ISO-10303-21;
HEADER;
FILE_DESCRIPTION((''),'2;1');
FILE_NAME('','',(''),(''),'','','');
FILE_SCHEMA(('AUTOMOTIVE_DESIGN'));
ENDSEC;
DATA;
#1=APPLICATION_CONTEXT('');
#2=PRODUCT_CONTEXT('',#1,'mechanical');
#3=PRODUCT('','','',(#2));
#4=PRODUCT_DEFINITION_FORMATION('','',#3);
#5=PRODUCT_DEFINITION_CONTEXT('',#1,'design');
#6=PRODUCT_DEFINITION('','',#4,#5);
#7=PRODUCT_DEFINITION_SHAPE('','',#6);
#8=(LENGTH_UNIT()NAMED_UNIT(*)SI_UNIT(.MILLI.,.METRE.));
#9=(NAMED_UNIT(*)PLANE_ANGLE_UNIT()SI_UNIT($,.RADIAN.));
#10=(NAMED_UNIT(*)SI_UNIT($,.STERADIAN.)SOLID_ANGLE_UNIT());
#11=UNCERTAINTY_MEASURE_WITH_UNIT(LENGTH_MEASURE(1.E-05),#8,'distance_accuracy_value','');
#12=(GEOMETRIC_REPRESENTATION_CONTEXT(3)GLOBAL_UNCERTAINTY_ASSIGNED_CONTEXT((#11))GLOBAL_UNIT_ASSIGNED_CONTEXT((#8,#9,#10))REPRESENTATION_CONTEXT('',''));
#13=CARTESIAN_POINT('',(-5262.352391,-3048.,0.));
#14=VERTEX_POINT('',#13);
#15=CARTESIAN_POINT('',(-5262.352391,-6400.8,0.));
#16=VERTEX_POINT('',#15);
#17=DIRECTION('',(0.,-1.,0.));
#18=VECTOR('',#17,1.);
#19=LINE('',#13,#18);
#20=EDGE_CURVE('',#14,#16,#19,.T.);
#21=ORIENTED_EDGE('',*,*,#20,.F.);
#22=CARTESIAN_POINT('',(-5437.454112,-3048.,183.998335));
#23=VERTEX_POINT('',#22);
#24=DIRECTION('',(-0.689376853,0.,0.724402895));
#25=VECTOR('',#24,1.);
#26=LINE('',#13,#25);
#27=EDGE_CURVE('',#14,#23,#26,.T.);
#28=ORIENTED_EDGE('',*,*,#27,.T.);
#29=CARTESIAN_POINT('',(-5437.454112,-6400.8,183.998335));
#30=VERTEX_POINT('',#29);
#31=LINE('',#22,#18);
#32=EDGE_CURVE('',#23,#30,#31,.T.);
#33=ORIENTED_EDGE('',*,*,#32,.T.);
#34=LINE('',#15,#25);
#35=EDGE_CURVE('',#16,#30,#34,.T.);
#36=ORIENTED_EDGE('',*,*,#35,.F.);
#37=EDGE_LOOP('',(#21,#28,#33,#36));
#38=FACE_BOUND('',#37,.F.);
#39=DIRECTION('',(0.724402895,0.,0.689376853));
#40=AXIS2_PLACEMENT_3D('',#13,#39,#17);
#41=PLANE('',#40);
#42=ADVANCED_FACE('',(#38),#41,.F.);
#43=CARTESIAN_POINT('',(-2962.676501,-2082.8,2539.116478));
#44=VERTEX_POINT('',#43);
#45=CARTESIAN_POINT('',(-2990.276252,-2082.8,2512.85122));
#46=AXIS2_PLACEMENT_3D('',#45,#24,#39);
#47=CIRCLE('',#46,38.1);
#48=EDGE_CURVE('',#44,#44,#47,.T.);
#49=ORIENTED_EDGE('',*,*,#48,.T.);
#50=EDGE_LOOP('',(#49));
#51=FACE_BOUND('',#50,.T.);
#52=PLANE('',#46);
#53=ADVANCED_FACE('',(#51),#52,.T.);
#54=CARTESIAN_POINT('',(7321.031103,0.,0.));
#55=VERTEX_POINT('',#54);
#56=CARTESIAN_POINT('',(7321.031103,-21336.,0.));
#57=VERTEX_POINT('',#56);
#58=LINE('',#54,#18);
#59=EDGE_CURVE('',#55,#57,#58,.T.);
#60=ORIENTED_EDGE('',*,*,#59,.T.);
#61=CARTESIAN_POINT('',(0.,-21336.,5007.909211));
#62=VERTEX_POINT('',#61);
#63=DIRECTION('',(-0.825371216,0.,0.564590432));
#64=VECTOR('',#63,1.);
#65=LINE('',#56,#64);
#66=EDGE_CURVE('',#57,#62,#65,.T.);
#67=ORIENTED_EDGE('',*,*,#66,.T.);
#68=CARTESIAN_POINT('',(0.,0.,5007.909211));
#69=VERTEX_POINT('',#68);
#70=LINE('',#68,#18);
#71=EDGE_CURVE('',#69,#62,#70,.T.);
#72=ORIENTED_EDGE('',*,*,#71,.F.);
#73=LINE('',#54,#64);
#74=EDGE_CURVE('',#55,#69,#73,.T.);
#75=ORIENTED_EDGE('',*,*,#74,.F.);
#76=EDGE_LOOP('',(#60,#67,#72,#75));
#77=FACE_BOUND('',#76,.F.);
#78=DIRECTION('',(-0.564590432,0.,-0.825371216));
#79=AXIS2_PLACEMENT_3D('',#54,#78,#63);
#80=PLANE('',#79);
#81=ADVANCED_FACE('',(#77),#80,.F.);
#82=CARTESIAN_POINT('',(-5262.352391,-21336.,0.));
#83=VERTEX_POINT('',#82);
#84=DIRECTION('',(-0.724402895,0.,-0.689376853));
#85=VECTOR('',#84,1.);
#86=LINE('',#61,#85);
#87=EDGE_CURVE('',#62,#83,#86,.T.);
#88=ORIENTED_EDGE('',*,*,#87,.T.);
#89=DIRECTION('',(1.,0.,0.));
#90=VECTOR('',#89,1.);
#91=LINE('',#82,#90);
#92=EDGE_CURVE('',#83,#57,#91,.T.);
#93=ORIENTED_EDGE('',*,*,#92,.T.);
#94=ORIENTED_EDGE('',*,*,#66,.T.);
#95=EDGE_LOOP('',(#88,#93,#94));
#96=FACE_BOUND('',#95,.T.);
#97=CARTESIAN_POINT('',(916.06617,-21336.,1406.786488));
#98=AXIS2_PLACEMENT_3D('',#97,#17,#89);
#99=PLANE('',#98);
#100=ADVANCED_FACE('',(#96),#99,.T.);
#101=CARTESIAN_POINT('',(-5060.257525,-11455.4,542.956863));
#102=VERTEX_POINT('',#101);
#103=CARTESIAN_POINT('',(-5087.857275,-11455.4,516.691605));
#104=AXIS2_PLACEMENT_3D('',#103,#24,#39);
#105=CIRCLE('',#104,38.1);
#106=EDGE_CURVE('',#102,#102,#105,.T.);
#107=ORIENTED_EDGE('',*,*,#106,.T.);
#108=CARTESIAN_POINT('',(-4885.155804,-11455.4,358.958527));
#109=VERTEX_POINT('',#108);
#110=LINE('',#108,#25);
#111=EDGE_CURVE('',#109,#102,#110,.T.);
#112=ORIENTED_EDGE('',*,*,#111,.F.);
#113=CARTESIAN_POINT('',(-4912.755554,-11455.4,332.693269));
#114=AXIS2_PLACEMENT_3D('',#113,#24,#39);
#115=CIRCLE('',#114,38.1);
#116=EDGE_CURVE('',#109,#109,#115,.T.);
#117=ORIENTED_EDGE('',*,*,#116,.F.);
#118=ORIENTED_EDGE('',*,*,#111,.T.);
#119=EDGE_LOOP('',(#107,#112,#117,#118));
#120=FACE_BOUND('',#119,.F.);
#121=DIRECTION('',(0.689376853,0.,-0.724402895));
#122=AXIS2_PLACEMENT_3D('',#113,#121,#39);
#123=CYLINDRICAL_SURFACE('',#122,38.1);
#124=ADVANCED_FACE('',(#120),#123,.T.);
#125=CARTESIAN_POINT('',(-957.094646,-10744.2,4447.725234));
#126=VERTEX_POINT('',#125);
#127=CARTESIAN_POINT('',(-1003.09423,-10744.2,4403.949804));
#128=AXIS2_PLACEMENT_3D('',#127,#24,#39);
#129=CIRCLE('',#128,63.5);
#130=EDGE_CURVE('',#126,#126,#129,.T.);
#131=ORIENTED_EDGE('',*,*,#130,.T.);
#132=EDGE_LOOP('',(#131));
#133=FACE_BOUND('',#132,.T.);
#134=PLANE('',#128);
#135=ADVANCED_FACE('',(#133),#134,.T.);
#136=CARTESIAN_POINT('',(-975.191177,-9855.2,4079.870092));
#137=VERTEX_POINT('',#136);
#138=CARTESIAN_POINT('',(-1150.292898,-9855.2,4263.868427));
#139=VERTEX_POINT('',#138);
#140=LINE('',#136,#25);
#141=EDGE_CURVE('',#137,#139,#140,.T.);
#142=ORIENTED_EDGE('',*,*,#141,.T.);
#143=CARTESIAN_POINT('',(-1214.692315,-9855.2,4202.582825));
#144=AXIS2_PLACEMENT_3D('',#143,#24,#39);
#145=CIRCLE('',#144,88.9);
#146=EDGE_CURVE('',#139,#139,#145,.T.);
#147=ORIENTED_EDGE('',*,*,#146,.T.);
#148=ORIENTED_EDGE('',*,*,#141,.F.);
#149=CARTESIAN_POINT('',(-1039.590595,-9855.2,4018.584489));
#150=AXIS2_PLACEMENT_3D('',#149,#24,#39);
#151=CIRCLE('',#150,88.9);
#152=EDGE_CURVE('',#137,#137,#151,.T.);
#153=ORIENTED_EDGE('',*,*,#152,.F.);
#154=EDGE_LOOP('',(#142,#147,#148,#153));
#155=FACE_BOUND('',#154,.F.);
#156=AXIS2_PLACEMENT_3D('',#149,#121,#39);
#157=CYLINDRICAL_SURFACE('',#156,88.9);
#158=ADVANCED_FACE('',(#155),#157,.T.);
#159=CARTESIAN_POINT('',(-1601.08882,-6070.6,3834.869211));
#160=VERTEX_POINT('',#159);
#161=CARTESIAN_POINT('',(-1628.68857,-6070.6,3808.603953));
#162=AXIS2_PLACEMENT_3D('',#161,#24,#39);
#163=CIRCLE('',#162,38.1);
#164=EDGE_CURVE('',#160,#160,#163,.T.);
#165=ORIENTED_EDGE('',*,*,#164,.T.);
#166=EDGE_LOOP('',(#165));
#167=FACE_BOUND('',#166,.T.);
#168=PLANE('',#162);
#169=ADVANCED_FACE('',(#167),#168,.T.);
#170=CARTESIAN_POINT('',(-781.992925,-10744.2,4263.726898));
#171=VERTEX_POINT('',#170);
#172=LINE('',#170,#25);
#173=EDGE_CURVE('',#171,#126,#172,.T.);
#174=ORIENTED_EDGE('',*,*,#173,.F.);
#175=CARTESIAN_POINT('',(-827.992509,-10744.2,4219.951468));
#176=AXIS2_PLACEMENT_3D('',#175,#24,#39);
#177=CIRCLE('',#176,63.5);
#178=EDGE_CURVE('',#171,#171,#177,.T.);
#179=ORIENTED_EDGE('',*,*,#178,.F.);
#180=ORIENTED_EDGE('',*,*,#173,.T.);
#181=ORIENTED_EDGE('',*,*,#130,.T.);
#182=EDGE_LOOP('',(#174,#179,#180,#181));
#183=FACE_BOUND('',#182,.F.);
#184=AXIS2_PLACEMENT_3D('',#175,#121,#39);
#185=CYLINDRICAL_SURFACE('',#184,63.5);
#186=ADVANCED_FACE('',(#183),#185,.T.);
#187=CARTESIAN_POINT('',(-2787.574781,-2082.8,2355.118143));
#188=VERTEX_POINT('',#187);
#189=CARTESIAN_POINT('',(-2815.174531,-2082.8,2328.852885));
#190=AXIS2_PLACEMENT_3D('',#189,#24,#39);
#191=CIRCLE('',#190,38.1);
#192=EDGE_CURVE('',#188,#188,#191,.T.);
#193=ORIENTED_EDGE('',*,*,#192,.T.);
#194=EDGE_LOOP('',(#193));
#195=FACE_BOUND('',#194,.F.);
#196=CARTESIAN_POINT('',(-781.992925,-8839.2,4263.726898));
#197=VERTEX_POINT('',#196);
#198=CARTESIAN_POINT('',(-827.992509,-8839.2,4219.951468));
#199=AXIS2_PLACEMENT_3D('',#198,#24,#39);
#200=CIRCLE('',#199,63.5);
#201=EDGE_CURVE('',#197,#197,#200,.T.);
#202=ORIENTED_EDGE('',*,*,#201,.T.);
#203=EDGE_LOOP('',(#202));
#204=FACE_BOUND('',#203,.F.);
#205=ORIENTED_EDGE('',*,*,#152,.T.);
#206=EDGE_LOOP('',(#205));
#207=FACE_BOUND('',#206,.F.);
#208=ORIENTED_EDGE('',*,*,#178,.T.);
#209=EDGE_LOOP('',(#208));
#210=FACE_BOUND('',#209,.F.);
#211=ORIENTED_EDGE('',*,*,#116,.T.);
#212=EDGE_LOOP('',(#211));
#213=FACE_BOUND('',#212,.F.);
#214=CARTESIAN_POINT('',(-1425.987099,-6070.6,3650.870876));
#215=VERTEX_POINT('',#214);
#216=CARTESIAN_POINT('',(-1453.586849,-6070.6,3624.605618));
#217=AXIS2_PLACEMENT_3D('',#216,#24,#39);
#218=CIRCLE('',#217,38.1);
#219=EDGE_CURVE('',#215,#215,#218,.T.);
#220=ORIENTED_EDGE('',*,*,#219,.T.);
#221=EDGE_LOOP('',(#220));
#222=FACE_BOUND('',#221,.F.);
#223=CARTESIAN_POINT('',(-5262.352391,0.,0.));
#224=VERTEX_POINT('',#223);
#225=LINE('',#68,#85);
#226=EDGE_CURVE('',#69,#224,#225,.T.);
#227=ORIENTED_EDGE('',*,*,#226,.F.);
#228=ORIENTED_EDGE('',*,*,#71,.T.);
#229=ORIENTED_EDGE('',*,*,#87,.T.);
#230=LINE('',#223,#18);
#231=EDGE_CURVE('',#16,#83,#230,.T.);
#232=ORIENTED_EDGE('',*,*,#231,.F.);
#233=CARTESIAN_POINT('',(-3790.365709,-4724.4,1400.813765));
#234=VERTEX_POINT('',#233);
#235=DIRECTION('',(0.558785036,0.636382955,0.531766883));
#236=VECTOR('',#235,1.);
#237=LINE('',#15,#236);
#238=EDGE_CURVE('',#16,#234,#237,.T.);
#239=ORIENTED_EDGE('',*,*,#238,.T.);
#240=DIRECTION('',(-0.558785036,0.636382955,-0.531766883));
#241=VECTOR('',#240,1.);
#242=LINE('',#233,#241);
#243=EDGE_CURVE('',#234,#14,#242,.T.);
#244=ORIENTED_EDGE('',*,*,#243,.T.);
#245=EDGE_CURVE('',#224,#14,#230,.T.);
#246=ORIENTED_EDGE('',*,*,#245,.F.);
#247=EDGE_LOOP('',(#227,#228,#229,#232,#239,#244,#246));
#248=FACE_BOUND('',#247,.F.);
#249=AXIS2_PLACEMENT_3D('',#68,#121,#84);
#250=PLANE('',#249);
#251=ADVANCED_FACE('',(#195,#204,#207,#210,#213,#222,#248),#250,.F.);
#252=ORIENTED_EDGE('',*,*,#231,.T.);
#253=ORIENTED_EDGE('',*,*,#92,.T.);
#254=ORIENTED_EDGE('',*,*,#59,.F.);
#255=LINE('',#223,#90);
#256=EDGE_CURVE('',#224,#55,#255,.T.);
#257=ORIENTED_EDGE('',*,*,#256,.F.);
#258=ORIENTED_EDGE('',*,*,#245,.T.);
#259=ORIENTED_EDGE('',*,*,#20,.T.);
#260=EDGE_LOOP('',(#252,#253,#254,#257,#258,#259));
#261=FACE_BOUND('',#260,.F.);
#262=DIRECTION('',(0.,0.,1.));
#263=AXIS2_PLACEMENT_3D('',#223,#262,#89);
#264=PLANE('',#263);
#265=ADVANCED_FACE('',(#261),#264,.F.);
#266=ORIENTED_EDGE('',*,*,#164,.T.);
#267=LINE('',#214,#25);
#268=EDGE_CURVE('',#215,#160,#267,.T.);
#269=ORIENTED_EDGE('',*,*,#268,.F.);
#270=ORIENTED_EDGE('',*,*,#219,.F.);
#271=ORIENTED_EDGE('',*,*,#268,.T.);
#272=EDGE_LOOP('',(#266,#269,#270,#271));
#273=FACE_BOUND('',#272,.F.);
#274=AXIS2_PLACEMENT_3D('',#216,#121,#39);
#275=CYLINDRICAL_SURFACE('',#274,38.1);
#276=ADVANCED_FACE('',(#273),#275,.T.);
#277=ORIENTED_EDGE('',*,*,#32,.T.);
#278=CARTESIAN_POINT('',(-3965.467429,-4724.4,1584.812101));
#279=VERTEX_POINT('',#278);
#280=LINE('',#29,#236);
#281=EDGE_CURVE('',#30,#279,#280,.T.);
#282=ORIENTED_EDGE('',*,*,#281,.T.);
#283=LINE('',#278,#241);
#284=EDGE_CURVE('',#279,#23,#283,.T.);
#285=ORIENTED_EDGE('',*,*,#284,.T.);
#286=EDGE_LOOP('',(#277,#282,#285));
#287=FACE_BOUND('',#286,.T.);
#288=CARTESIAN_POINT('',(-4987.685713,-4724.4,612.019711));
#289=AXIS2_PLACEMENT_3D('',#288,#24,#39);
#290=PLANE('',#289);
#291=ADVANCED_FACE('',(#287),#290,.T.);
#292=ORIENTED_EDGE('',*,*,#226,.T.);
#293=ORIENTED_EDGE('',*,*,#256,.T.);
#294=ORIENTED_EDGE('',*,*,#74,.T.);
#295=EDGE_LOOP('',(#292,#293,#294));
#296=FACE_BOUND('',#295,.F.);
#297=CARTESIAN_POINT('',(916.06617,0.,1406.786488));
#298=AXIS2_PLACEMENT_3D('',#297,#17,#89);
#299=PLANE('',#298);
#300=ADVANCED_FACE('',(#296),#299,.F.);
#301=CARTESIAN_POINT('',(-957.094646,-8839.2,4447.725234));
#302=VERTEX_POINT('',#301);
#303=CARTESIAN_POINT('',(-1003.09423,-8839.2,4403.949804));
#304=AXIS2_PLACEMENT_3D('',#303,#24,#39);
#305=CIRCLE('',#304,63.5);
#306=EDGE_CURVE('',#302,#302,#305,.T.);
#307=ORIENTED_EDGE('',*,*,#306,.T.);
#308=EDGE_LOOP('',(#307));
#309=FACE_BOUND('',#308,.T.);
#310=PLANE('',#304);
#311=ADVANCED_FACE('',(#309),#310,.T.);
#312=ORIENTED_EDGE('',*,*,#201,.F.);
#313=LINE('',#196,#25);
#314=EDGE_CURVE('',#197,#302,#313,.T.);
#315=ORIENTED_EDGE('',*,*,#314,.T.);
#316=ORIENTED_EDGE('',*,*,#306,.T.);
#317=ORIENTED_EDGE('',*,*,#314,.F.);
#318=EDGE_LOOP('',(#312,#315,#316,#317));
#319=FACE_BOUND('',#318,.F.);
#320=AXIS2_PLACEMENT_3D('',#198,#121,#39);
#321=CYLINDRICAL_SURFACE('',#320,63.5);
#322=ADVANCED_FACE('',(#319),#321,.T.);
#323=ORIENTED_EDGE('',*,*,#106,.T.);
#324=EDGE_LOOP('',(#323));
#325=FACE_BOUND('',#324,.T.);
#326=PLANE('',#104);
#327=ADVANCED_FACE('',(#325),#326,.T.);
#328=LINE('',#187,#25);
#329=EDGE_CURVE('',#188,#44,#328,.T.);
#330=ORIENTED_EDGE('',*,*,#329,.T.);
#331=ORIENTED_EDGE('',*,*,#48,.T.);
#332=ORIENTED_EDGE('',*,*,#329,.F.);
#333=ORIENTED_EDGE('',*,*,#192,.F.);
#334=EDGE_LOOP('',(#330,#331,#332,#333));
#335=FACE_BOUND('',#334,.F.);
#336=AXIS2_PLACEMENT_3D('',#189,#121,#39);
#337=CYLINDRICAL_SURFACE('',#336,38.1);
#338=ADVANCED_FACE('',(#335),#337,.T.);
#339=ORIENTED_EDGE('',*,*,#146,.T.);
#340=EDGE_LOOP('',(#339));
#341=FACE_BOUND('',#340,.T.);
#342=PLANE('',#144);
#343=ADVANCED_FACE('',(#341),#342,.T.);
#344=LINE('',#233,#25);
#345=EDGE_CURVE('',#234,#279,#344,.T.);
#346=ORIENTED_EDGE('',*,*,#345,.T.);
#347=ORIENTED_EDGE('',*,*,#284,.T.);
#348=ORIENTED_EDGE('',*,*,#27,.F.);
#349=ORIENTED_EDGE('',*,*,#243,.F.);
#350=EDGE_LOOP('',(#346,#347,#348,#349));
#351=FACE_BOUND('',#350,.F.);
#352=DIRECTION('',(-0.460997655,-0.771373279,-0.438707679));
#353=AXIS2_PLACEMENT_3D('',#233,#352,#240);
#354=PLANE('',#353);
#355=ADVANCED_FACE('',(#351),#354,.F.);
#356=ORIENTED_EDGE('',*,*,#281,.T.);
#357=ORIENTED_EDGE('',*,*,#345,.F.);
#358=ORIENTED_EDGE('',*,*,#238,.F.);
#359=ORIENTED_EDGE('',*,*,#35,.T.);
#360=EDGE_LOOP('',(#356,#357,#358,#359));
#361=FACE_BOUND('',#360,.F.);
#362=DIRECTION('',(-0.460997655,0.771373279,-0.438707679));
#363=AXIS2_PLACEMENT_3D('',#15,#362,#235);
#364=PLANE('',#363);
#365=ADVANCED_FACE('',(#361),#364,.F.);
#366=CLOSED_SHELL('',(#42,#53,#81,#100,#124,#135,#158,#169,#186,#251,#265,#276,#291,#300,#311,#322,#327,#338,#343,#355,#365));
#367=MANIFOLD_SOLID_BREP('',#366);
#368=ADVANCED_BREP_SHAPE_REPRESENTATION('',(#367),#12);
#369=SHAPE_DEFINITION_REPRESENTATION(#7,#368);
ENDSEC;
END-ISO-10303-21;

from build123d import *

# Parameters (mm, degrees)
F1_DEPTH  = 21336
F2_R      = 38.1
F3_DEPTH  = 254
F4_R      = 38.1
F5_DEPTH  = 254
F6_R      = 38.1
F7_DEPTH  = 254
F8_R      = 63.5
F9_DEPTH  = 254
F10_R     = 63.5
F11_DEPTH = 254
F12_R     = 88.9
F13_DEPTH = 254
F15_DEPTH = 254


with BuildPart() as f1:
    # F0 (on Front) → F1 (new body)
    with BuildSketch(Plane.XZ):
        Polygon((0, 5007.909211275), (-5262.3523914336, 0), (7321.0311030403, 0), align=None)
    extrude(amount=F1_DEPTH)

    # F2 (on face) → F3 (join)
    with BuildSketch(Plane(origin=(-2500.8826949727, 0, 2627.9482065997), x_dir=(0.7244028951, 0, 0.689376853), z_dir=(-0.689376853, 0, 0.7244028951))):
        with Locations((-433.8633075859, -2082.8)):
            Circle(F2_R)
    extrude(amount=F3_DEPTH)

    # F4 (on face) → F5 (join)
    with BuildSketch(Plane(origin=(-2500.8826949727, 0, 2627.9482065997), x_dir=(0.7244028951, 0, 0.689376853), z_dir=(-0.689376853, 0, 0.7244028951))):
        with Locations((-3329.4633075859, -11455.4)):
            Circle(F4_R)
    extrude(amount=F5_DEPTH)

    # F6 (on face) → F7 (join)
    with BuildSketch(Plane(origin=(-2500.8826949727, 0, 2627.9482065997), x_dir=(0.7244028951, 0, 0.689376853), z_dir=(-0.689376853, 0, 0.7244028951))):
        with Locations((1445.7366924141, -6070.6)):
            Circle(F6_R)
    extrude(amount=F7_DEPTH)

    # F8 (on face) → F9 (join)
    with BuildSketch(Plane(origin=(-2500.8826949727, 0, 2627.9482065997), x_dir=(0.7244028951, 0, 0.689376853), z_dir=(-0.689376853, 0, 0.7244028951))):
        with Locations((2309.3366924141, -8839.2)):
            Circle(F8_R)
    extrude(amount=F9_DEPTH)

    # F10 (on face) → F11 (join)
    with BuildSketch(Plane(origin=(-2500.8826949727, 0, 2627.9482065997), x_dir=(0.7244028951, 0, 0.689376853), z_dir=(-0.689376853, 0, 0.7244028951))):
        with Locations((2309.3366924141, -10744.2)):
            Circle(F10_R)
    extrude(amount=F11_DEPTH)

    # F12 (on face) → F13 (join)
    with BuildSketch(Plane(origin=(-2500.8826949727, 0, 2627.9482065997), x_dir=(0.7244028951, 0, 0.689376853), z_dir=(-0.689376853, 0, 0.7244028951))):
        with Locations((2017.2366924141, -9855.2)):
            Circle(F12_R)
    extrude(amount=F13_DEPTH)

    # F14 (on face) → F15 (join)
    with BuildSketch(Plane(origin=(-2500.8826949727, 0, 2627.9482065997), x_dir=(0.7244028951, 0, 0.689376853), z_dir=(-0.689376853, 0, 0.7244028951))):
        Polygon((-1780.0633075859, -4724.4), (-3812.0633075859, -3048), (-3812.0633075859, -6400.8), align=None)
    extrude(amount=F15_DEPTH)


solid = f1.part
